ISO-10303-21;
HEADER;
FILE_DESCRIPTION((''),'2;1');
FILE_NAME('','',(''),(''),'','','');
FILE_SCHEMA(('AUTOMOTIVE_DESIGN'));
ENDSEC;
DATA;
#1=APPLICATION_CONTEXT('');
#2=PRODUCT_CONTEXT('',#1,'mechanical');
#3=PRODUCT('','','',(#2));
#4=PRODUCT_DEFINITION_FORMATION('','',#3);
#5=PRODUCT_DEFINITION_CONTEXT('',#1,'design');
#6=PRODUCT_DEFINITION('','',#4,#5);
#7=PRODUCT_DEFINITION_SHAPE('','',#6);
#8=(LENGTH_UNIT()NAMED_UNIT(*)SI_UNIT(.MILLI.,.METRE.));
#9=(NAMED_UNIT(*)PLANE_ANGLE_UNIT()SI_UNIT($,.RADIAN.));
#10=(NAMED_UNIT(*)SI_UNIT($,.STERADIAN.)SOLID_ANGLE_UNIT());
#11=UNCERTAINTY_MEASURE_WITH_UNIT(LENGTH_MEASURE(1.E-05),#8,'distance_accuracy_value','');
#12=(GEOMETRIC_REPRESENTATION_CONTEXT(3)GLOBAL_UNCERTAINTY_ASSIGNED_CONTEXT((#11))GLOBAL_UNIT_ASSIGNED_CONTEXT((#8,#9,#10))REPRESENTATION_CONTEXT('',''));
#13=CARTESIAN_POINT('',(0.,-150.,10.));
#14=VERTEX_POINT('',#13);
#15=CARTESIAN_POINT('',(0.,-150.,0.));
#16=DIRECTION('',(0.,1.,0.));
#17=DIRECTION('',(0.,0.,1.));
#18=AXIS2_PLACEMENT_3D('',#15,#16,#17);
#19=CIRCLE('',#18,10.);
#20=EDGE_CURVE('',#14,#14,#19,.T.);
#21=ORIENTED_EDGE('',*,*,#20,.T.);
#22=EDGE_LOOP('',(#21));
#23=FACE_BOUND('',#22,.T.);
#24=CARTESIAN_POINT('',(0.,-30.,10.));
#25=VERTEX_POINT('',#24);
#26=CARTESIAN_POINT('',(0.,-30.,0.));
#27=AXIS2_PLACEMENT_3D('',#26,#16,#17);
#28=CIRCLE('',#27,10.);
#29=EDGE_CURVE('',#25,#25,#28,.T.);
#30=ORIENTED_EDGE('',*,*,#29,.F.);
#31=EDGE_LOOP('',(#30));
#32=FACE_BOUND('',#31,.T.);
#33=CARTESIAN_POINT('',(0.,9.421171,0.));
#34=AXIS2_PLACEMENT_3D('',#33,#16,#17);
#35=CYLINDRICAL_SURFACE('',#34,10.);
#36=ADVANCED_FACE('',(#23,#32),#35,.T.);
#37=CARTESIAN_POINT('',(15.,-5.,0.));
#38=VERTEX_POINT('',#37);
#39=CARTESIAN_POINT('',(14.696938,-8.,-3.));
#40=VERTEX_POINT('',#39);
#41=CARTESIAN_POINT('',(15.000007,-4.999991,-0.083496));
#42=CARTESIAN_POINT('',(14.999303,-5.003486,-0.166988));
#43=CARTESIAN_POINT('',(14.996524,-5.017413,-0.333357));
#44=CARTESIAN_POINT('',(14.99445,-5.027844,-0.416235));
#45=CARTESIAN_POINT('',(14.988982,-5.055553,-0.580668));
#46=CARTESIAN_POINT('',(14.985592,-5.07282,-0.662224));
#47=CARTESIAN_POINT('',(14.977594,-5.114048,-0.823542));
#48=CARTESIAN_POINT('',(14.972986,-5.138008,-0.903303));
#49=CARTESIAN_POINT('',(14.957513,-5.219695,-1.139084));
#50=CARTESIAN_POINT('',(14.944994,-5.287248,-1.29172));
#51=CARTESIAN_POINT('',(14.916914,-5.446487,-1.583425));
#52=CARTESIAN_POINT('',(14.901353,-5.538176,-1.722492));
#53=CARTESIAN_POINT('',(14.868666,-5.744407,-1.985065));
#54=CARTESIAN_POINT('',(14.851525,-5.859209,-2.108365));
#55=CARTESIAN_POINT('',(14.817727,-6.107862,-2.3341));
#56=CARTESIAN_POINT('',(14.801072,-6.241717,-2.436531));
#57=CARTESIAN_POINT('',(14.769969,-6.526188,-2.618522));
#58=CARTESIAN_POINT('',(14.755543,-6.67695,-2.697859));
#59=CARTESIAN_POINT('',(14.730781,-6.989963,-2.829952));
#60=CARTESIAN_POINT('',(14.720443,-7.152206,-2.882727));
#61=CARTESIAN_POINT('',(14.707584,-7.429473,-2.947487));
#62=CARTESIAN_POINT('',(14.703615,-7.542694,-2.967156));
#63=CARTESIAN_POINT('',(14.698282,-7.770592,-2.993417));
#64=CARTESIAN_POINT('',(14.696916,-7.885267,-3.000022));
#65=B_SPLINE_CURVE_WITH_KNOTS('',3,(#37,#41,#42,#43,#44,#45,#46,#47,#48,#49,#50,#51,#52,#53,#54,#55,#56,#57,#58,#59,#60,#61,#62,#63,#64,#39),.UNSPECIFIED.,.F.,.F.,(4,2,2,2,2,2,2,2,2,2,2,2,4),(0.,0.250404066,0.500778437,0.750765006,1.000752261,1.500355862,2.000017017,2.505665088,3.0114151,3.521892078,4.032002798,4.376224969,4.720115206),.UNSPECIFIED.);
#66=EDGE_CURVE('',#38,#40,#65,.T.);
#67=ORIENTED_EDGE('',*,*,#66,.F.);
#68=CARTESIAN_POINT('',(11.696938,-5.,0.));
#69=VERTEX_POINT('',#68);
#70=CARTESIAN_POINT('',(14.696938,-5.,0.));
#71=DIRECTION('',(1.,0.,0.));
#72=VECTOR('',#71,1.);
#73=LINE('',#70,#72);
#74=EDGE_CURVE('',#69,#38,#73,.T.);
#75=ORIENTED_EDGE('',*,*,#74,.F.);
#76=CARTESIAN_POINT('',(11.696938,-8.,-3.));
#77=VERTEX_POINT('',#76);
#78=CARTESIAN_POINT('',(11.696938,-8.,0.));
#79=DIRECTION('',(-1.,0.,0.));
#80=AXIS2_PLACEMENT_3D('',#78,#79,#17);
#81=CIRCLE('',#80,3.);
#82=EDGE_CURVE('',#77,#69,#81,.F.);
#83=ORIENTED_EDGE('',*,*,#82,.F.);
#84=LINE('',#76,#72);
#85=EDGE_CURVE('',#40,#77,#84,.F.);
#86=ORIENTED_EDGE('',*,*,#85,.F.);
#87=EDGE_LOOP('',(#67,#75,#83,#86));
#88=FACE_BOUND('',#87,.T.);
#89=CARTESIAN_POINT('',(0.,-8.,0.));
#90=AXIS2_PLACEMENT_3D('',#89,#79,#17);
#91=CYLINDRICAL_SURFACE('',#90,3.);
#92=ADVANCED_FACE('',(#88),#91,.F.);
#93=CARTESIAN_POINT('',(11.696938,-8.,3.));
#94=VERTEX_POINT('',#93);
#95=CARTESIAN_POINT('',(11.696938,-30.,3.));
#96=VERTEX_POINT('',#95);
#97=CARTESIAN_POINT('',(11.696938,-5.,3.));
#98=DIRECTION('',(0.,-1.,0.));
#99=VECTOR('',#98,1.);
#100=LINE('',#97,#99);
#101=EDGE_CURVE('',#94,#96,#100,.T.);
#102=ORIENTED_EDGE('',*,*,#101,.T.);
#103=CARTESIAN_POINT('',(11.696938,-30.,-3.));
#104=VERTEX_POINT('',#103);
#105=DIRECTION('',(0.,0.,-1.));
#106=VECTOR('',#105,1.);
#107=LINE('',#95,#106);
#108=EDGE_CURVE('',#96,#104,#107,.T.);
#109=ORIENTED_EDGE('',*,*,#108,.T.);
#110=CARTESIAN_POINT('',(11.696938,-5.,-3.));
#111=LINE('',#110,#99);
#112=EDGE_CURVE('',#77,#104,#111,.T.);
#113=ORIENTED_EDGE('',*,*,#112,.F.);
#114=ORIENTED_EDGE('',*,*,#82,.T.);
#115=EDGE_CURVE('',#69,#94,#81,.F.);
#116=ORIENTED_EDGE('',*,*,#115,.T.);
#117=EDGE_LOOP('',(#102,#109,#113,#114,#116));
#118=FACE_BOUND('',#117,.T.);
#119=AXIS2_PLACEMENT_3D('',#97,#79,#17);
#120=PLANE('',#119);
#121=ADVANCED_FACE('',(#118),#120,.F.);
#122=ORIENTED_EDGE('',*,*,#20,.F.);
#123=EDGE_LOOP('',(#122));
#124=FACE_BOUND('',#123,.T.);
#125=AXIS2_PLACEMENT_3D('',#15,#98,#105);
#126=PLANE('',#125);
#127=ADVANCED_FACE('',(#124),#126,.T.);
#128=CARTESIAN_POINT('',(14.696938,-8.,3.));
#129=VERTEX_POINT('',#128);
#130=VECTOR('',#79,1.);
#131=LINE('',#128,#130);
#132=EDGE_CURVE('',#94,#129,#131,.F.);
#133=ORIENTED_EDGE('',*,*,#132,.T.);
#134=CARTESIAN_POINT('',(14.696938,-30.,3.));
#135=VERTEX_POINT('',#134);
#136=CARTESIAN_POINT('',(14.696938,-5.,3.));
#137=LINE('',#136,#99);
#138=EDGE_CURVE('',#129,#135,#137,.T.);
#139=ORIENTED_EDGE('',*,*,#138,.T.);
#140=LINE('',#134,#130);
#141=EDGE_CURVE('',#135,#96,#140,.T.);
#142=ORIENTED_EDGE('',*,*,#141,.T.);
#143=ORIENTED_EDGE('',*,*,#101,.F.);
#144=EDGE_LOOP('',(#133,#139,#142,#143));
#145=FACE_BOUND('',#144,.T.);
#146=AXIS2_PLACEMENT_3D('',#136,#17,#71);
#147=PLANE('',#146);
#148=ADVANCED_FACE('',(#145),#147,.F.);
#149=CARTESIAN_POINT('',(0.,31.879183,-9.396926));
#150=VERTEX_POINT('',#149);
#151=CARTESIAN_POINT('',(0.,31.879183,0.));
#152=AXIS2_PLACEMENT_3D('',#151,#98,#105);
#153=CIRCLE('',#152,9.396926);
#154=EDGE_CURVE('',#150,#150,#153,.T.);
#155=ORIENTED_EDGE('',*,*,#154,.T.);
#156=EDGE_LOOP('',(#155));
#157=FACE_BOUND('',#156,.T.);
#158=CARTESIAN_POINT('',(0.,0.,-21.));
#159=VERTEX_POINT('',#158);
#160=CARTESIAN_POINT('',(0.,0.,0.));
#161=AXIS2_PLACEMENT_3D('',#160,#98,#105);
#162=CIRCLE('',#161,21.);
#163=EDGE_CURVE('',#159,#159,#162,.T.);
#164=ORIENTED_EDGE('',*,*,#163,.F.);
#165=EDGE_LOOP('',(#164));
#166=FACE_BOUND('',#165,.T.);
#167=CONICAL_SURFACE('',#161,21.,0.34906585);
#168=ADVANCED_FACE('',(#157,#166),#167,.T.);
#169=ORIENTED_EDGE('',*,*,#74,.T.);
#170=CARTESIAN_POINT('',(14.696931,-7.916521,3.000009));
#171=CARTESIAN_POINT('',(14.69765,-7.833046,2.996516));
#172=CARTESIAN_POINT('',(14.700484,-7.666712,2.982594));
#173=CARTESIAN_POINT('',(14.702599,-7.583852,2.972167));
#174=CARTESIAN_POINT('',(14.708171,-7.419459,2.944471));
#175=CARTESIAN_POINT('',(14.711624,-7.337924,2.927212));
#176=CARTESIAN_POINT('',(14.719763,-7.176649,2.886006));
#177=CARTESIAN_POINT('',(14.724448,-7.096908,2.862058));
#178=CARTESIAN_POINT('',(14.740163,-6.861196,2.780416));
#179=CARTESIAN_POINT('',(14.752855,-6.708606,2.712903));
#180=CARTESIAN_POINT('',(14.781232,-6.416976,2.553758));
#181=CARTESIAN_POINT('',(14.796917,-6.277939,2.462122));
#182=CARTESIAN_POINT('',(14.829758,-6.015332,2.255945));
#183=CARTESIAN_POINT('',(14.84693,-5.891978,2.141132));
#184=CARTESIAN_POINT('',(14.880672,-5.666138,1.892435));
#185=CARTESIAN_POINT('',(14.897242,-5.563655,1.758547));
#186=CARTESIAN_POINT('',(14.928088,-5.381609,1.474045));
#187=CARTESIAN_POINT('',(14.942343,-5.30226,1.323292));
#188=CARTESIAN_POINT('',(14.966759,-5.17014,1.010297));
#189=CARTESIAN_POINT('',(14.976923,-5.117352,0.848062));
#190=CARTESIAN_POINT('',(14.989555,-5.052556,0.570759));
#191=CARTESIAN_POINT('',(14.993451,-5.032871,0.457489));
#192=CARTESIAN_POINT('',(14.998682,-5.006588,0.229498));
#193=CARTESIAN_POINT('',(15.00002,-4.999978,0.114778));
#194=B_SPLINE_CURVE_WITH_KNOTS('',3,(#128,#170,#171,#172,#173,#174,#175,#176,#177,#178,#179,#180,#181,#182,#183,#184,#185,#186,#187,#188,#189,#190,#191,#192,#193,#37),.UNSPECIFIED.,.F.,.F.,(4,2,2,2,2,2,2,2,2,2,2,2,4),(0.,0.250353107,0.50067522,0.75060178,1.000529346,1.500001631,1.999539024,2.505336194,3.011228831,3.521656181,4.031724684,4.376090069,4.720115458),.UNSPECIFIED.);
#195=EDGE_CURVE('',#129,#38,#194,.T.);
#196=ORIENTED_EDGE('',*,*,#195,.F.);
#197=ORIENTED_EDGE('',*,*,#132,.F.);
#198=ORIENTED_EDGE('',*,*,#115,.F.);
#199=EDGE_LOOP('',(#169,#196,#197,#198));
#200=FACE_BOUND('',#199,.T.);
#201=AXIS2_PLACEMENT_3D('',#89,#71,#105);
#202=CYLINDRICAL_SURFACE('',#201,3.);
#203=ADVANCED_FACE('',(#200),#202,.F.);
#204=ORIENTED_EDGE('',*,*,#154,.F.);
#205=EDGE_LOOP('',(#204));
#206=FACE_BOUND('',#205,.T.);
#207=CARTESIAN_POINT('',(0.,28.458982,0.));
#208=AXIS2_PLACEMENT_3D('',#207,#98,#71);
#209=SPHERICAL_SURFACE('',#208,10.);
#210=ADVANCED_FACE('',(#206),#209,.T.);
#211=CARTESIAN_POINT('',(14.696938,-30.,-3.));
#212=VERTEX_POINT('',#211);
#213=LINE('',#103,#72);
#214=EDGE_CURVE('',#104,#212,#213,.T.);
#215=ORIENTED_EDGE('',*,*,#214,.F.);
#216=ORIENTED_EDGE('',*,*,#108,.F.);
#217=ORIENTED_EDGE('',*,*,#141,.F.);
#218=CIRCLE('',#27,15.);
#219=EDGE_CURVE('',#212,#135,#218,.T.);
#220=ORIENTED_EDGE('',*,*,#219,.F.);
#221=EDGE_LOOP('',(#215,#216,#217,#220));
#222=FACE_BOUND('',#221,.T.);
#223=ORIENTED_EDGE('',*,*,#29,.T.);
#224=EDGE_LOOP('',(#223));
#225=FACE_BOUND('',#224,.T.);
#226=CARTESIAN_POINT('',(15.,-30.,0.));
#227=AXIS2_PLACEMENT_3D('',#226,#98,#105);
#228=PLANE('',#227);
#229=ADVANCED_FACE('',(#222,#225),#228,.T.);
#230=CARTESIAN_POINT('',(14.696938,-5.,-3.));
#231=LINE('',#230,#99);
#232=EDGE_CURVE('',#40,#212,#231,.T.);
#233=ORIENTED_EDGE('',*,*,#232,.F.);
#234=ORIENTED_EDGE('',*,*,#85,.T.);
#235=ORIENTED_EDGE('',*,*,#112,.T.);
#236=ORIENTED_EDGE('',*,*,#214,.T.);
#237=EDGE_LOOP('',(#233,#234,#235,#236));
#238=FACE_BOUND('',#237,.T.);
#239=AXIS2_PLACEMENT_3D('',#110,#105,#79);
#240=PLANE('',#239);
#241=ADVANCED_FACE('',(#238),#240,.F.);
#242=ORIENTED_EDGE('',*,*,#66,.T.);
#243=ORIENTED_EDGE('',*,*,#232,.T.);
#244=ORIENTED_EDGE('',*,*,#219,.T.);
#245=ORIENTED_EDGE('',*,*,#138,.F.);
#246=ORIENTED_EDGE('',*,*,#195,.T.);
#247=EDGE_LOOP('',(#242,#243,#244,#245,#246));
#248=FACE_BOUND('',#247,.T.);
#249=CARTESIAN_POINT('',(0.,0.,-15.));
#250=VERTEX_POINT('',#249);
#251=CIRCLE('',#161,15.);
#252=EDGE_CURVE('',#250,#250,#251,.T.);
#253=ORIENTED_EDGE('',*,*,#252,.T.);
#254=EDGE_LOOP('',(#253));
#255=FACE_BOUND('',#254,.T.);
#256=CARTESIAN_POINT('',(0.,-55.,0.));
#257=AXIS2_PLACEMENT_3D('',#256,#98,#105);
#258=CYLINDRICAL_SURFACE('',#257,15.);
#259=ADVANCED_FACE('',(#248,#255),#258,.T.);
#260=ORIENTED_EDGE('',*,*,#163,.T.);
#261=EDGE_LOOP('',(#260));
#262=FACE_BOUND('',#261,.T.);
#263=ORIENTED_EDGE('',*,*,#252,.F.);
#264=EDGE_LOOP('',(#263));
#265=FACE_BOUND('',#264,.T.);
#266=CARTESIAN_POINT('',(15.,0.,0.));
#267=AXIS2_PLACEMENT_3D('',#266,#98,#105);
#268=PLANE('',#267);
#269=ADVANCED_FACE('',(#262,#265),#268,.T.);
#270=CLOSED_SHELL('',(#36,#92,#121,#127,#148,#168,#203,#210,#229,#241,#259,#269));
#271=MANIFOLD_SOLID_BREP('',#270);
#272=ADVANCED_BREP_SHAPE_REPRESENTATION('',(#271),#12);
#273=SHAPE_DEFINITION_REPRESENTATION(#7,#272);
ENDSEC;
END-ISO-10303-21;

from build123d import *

# Parameters (mm, degrees)
SKETCH2_W          = 5
SKETCH2_H          = 120
CUT_EXTRUDE1_START = -25
CUT_EXTRUDE1_DEPTH = 25
FILLET1_R          = 3


with BuildPart() as part:
    # Sketch1 → Revolve1 (revolve)
    with BuildSketch(Plane.XY, mode=Mode.PRIVATE) as revolve1_sk:
        with BuildLine():
            Line((0, -150), (15, -150))
            Line((15, -150), (15, 0))
            Line((15, 0), (21, 0))
            Line((21, 0), (9.396926208, 31.87918324))
            ThreePointArc((9.396926208, 31.87918324), (5.735764364, 36.65050225), (0, 38.458981807))
            Line((0, 38.458981807), (0, -150))
        make_face()
    revolve(revolve1_sk.sketch.rotate(Axis((0, -160.189242242, 0), (0, 1, 0)), 90), axis=Axis((0, -160.189242242, 0), (0, 1, 0)))

    # Sketch2 → Cut-Revolve1 (revolve, cut)
    with BuildSketch(Plane.XY):
        with Locations((12.5, -90)):
            Rectangle(SKETCH2_W, SKETCH2_H)
    revolve(axis=Axis((0, 9.42117093, 0), (0, -1, 0)), mode=Mode.SUBTRACT)

    # Sketch3 → Cut-Extrude1 (cut)
    with BuildSketch(Plane.XZ.offset(30).offset(CUT_EXTRUDE1_START)):
        with BuildLine():
            Line((14.696938457, 3), (11.696938457, 3))
            Line((11.696938457, 3), (11.696938457, -3))
            Line((11.696938457, -3), (14.696938457, -3))
            ThreePointArc((14.696938457, -3), (15, 0), (14.696938457, 3))
        make_face()
    extrude(amount=CUT_EXTRUDE1_DEPTH, mode=Mode.SUBTRACT)

    # Fillet1
    fillet1_edges = [part.edges().sort_by_distance(p)[0] for p in [
        (13.196938457, -5, 3),
        (13.196938457, -5, -3),
    ]]
    fillet(fillet1_edges, radius=FILLET1_R - 0.0001)  # a hair under: the kernel refuses the full size


solid = part.part
